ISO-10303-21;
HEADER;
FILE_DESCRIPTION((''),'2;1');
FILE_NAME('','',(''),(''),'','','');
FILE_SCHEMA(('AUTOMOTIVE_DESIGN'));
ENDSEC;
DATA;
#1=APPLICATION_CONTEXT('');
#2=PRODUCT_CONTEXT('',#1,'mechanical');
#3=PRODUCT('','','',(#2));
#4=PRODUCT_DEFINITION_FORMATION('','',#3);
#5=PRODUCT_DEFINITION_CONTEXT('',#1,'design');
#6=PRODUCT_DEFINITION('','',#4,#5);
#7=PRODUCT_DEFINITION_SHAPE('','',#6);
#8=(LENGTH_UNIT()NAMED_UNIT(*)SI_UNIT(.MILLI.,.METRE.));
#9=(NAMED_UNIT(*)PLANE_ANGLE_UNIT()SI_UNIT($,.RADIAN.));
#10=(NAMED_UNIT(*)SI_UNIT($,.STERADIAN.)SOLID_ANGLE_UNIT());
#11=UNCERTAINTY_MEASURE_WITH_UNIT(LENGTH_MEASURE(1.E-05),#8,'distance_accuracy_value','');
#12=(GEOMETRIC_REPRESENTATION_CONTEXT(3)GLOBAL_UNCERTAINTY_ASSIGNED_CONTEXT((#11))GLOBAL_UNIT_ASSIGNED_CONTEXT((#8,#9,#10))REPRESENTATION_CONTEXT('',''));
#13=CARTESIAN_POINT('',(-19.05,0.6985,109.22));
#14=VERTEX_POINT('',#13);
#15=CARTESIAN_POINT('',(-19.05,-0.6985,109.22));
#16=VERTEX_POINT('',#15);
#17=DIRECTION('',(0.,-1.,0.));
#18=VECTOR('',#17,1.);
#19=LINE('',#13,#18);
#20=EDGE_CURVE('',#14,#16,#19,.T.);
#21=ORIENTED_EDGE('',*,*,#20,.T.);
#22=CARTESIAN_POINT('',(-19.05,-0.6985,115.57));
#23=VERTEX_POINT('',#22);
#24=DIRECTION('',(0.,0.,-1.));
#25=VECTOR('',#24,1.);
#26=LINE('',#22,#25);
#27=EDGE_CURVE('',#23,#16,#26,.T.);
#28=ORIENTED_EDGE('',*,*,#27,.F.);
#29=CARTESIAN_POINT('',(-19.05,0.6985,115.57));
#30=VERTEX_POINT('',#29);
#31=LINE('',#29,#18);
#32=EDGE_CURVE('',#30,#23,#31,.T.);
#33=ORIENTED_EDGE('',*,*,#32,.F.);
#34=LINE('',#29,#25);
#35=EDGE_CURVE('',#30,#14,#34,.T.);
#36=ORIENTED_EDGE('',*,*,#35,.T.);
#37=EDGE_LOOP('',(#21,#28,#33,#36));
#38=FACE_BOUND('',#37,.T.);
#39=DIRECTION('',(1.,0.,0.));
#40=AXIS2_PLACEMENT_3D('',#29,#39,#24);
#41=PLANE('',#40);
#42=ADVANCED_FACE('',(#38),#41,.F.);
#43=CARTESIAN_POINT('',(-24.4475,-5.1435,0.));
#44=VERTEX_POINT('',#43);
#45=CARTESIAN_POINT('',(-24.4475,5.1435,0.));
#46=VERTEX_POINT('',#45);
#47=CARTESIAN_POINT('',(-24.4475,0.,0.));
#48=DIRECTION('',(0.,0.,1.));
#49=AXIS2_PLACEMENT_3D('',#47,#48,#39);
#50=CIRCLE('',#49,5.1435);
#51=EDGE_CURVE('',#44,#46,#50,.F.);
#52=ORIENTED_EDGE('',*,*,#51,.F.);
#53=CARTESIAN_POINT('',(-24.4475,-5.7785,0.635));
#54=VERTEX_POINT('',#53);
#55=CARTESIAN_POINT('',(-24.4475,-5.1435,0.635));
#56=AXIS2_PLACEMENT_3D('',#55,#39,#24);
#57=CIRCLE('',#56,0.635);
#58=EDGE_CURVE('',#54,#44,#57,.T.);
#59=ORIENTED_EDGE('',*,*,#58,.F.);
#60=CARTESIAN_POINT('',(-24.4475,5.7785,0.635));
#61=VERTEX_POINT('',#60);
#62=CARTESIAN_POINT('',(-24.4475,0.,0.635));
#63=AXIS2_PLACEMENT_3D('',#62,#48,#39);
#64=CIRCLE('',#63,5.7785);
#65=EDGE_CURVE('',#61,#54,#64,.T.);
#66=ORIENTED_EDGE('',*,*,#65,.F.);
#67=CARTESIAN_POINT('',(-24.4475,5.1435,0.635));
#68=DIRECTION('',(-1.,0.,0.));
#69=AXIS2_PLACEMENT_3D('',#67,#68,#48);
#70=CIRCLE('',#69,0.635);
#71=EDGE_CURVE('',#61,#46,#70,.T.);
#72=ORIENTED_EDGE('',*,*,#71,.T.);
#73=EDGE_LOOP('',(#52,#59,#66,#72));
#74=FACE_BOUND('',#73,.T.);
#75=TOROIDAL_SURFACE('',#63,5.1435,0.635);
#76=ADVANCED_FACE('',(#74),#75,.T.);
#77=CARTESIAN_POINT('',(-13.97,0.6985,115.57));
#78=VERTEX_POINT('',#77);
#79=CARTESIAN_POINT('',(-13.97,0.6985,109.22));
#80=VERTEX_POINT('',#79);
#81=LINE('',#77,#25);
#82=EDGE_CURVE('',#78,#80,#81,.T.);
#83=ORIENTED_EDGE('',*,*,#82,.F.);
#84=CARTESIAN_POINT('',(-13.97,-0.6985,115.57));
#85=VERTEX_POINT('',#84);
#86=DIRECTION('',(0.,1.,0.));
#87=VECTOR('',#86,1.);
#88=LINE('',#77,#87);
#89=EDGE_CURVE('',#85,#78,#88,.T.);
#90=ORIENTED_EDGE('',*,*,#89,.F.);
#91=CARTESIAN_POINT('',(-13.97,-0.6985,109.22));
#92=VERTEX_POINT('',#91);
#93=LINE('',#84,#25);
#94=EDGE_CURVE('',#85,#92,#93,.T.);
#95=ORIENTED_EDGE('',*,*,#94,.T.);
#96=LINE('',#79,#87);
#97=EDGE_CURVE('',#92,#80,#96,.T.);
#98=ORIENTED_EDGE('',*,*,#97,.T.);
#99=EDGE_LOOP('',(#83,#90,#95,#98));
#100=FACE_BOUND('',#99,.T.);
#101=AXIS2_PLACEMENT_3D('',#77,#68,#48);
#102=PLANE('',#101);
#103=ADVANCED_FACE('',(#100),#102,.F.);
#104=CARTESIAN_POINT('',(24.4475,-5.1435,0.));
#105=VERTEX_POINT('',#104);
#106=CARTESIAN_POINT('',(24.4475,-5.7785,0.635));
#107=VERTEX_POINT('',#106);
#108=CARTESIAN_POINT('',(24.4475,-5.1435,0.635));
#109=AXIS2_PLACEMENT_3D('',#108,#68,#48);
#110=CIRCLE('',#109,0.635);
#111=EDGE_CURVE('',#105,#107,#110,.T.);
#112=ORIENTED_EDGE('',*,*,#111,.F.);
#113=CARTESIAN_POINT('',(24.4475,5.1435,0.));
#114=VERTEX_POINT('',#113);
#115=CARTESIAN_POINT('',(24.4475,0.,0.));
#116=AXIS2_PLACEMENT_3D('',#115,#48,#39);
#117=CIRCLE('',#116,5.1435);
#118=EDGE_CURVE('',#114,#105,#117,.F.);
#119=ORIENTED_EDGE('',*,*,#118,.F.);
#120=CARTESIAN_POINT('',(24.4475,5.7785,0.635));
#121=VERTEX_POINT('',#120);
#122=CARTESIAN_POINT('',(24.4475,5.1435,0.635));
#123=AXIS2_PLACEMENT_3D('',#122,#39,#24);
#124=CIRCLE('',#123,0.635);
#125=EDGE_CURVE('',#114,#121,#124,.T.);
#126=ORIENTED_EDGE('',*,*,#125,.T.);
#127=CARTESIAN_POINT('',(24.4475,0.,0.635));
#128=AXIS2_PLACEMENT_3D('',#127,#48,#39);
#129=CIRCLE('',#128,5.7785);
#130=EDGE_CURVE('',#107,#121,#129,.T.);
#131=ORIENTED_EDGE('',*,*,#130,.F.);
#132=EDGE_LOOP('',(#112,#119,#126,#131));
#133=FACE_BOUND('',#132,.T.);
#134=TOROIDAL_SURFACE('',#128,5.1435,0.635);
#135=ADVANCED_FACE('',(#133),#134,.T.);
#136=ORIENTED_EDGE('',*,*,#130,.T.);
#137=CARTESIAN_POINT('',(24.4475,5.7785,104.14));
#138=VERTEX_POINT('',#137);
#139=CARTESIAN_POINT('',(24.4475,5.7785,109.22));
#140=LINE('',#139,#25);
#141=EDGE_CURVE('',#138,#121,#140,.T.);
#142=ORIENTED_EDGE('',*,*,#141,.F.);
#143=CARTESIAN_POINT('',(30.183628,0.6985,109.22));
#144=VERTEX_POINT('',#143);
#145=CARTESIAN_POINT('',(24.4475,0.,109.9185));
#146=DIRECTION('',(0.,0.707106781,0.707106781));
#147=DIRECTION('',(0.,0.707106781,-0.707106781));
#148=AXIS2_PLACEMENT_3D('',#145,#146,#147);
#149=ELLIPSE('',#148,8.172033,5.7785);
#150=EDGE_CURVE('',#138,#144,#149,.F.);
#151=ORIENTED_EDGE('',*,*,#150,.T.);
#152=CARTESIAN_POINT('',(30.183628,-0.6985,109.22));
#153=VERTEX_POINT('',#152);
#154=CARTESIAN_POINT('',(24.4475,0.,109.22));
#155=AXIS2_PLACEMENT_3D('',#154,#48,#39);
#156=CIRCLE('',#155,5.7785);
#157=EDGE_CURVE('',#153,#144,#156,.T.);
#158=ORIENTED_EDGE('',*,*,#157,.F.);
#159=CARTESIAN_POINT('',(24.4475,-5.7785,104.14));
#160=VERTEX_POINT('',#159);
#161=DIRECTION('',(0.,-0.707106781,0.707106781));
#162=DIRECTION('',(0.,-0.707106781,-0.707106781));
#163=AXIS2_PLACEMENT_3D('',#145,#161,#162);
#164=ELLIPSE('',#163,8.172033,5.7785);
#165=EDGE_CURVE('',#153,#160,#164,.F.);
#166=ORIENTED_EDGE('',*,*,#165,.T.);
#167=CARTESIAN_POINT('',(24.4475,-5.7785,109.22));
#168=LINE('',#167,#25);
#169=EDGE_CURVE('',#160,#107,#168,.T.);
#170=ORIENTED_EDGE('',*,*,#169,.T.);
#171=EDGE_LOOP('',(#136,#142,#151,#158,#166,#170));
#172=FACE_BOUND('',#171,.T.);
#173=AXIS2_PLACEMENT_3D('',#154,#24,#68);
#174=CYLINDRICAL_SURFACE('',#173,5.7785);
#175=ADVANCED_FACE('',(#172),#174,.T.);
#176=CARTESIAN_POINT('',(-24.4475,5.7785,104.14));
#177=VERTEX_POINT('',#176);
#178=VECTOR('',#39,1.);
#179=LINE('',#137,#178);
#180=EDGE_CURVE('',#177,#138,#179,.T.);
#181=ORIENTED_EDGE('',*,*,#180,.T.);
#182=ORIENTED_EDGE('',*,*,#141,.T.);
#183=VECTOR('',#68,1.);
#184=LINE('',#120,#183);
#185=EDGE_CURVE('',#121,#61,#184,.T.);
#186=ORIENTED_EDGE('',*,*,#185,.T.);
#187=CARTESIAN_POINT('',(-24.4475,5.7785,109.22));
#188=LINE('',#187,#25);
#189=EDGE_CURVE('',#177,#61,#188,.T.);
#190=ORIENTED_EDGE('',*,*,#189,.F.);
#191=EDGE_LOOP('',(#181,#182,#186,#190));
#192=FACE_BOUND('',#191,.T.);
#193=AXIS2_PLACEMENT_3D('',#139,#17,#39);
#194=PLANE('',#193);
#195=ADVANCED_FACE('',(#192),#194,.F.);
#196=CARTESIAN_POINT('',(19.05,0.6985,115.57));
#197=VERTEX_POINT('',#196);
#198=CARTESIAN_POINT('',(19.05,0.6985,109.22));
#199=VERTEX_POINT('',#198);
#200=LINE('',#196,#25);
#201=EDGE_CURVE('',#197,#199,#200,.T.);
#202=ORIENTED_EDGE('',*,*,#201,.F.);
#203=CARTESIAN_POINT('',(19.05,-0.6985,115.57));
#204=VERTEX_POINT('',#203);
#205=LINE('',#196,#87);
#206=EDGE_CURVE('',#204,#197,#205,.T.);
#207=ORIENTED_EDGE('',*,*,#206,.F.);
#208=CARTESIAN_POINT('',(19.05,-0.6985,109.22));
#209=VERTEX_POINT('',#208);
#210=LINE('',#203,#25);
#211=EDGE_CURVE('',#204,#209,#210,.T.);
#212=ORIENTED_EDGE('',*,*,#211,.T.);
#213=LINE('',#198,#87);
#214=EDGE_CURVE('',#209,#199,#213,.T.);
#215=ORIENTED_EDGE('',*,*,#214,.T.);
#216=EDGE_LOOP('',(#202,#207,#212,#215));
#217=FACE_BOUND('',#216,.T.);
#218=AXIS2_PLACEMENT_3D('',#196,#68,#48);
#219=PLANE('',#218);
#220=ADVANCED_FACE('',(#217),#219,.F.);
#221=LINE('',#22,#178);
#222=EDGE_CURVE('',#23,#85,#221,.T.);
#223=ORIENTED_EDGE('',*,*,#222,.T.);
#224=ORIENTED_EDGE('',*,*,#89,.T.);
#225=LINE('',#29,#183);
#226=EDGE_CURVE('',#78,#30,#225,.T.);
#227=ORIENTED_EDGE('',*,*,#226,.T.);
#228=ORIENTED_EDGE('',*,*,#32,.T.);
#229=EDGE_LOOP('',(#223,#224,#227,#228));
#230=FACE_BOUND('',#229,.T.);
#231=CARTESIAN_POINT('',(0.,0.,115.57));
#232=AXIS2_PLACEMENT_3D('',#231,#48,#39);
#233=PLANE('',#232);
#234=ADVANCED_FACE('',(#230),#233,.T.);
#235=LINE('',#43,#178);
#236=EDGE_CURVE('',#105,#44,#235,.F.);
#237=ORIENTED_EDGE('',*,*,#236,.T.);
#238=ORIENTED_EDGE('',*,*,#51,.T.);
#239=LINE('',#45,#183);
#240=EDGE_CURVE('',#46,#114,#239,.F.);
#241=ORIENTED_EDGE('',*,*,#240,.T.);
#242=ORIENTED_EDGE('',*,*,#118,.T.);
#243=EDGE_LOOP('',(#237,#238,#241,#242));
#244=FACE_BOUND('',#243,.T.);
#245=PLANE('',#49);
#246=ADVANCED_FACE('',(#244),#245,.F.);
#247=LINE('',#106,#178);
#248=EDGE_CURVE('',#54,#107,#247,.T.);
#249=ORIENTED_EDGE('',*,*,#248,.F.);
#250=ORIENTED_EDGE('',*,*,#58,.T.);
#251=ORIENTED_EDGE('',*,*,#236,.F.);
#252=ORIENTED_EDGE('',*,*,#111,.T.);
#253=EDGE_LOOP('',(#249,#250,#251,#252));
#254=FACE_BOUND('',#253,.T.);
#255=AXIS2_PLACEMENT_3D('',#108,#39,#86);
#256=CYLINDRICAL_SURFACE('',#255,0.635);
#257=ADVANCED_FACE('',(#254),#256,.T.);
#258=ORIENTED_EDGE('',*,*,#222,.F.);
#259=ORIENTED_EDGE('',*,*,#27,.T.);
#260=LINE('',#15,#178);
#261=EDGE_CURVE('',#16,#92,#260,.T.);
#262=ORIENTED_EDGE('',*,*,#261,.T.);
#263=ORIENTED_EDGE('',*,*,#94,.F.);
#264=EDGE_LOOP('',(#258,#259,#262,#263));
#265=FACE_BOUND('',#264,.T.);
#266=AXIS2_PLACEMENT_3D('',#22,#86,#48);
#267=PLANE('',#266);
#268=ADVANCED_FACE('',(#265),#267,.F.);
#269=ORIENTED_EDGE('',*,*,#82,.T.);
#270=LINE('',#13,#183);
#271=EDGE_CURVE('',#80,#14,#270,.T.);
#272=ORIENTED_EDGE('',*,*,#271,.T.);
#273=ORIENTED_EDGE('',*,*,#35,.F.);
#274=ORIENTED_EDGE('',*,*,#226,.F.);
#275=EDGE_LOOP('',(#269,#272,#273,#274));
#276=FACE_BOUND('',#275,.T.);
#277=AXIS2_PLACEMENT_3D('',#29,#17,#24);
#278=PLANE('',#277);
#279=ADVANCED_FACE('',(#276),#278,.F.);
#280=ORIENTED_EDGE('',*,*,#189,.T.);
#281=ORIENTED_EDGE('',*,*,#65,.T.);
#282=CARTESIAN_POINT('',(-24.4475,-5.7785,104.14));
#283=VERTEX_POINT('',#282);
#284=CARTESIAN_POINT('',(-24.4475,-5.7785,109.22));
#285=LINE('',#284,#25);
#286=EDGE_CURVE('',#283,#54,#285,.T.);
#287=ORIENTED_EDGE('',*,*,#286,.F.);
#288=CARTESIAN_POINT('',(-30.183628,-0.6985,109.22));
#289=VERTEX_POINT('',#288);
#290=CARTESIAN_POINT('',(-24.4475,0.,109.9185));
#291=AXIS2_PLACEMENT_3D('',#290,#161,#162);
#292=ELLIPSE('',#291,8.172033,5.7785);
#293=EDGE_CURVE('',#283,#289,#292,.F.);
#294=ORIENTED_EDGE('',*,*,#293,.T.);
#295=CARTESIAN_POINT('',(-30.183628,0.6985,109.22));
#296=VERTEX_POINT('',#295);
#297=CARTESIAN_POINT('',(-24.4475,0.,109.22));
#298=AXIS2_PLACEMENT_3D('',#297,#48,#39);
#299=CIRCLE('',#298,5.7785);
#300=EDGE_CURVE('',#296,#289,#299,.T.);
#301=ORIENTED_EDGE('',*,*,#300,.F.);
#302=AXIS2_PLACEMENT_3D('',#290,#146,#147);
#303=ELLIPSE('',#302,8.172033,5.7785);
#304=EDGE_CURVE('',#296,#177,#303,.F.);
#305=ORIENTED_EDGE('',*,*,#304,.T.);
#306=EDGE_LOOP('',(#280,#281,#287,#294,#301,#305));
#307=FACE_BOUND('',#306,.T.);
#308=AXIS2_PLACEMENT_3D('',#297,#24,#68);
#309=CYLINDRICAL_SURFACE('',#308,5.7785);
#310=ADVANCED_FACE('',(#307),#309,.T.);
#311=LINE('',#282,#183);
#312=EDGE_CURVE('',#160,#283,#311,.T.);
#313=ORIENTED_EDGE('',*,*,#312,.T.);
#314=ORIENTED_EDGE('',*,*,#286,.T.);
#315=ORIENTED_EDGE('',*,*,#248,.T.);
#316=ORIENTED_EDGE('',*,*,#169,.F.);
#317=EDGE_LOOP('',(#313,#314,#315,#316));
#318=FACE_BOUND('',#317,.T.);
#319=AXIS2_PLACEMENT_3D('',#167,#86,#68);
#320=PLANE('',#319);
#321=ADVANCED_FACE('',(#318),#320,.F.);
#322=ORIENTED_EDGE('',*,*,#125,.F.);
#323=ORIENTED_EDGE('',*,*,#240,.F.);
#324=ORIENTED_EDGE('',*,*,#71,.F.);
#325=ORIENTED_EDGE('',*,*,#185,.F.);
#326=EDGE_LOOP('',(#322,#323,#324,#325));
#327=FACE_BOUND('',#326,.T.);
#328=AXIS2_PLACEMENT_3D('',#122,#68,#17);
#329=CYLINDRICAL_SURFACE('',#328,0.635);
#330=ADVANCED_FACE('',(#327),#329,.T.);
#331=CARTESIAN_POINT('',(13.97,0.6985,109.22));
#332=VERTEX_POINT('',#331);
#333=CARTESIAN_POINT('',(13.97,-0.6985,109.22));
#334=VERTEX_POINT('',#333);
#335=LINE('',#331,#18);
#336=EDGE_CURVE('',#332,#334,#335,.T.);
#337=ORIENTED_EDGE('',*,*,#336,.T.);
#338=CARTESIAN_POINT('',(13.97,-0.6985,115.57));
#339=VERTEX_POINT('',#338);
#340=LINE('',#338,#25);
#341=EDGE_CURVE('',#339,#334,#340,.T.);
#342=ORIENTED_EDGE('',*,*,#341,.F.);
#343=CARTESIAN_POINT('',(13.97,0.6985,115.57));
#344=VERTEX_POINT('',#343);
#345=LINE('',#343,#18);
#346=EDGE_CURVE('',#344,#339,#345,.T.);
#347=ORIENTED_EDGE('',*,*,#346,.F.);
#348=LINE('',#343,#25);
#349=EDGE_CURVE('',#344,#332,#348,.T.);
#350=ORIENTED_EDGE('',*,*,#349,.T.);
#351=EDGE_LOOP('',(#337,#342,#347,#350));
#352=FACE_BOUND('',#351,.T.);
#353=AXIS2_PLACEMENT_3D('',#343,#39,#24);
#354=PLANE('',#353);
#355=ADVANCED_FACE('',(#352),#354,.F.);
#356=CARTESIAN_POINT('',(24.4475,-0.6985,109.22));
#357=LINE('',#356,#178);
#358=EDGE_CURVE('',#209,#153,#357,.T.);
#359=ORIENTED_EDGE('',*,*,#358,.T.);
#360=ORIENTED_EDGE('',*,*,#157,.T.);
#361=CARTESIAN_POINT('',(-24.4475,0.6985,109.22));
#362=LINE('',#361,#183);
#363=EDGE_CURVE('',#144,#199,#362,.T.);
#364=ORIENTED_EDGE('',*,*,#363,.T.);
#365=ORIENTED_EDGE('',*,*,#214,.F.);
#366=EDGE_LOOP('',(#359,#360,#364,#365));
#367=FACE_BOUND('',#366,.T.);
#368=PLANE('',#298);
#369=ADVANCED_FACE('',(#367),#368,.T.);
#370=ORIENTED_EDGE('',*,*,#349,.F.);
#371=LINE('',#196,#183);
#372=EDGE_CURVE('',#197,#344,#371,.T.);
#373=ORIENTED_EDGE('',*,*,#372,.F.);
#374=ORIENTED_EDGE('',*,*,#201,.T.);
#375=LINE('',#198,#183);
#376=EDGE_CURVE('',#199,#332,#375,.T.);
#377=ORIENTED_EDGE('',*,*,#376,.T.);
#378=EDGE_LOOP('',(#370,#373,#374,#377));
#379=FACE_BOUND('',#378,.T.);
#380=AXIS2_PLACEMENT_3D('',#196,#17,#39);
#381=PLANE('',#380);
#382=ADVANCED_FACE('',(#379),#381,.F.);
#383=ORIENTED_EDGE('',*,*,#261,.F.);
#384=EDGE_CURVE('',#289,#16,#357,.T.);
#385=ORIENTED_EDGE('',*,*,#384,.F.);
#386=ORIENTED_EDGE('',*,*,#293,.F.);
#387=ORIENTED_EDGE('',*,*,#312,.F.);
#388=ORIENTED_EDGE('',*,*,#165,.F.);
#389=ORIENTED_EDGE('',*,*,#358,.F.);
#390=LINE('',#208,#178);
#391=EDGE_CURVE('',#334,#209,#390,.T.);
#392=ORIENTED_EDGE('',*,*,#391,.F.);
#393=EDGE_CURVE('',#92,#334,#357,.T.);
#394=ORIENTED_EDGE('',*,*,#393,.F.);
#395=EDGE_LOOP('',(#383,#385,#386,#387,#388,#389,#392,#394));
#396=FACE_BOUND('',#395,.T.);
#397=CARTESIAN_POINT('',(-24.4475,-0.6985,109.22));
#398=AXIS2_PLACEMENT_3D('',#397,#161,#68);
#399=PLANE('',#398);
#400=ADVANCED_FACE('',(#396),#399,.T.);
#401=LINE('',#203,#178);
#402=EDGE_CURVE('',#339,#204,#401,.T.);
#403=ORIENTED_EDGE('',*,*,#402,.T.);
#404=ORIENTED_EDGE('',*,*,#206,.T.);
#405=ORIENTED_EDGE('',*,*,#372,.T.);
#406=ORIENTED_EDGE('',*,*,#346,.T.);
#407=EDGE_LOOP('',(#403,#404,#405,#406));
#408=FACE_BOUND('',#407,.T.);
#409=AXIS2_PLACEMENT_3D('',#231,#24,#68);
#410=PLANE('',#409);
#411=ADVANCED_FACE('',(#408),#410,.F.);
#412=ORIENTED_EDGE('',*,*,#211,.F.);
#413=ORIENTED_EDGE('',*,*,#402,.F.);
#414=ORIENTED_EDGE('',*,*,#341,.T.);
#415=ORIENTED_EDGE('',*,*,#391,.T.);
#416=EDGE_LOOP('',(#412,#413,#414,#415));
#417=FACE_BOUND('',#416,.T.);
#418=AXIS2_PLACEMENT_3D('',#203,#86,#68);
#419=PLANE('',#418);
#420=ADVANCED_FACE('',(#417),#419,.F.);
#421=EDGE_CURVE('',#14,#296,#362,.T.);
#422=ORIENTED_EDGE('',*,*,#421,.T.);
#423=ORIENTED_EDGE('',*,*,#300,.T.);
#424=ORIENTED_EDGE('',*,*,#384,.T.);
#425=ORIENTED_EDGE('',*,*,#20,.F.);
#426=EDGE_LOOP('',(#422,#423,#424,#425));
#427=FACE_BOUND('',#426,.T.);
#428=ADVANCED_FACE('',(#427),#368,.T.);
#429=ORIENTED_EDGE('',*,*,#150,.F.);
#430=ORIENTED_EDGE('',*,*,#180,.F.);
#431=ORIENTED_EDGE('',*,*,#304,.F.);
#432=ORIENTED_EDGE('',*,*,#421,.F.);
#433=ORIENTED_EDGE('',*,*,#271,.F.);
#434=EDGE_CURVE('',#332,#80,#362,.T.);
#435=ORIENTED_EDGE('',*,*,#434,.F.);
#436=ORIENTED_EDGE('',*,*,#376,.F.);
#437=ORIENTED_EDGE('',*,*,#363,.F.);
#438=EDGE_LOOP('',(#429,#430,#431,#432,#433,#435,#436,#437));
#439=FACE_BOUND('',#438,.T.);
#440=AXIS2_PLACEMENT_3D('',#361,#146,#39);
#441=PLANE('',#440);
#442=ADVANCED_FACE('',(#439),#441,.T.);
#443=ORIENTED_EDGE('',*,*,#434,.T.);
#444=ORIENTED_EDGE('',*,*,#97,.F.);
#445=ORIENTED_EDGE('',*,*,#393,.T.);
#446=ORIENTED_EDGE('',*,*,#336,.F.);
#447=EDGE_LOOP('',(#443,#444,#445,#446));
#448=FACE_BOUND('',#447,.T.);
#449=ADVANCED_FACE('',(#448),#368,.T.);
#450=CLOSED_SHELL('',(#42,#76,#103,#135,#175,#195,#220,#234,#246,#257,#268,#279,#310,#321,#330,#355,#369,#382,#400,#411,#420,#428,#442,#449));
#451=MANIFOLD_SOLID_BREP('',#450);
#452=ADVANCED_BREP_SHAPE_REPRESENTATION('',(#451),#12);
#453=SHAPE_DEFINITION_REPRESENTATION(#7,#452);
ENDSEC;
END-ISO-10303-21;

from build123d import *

# Parameters (mm, degrees)
BOSS_EXTRUDE1_DEPTH = 109.22
FILLET1_R           = 0.635
CHAMFER1_SIZE       = 5.08
SKETCH2_W           = 5.08
SKETCH2_H           = 1.397
BOSS_EXTRUDE2_DEPTH = 6.35


with BuildPart() as part:
    # Sketch1 → Boss-Extrude1 (new body)
    with BuildSketch(Plane.XY):
        with BuildLine():
            Line((24.4475, -5.7785), (-24.4475, -5.7785))
            ThreePointArc((-24.4475, -5.7785), (-30.226, 0), (-24.4475, 5.7785))
            Line((-24.4475, 5.7785), (24.4475, 5.7785))
            ThreePointArc((24.4475, 5.7785), (30.226, 0), (24.4475, -5.7785))
        make_face()
    extrude(amount=BOSS_EXTRUDE1_DEPTH)

    # Fillet1
    fillet1_edges = [part.edges().sort_by_distance(p)[0] for p in [
        (0, 5.7785, 0),
        (30.226, 0, 0),
        (0, -5.7785, 0),
        (-30.226, 0, 0),
    ]]
    fillet(fillet1_edges, radius=FILLET1_R)

    # Chamfer1
    # the kernel refuses this chamfer: 5.08 mm, written as the material it takes off along each edge
    with BuildSketch(Plane(origin=(-37.511649579, 5.7785, 109.22), x_dir=(0, 0.02749587661058642, -0.9996219169112968), z_dir=(1, 0, 0))) as chamfer1_piece_1:
        Polygon((CHAMFER1_SIZE * 0.999621916911, -CHAMFER1_SIZE * 0.0274958766106), (-CHAMFER1_SIZE * 0.0274958766106, -CHAMFER1_SIZE * 0.999621916911), (0, 0), align=None)
    extrude(amount=75.023299158, mode=Mode.SUBTRACT)
    with BuildSketch(Plane(origin=(37.511649579, -5.7785, 109.22), x_dir=(0, 0.9996219169112966, 0.02749587661058728), z_dir=(-1, 0, 0))) as chamfer1_piece_2:
        Polygon((CHAMFER1_SIZE * 0.999621916911, CHAMFER1_SIZE * 0.0274958766106), (-CHAMFER1_SIZE * 0.0274958766106, CHAMFER1_SIZE * 0.999621916911), (0, 0), align=None)
    extrude(amount=75.023299158, mode=Mode.SUBTRACT)

    # Sketch2 → Boss-Extrude2 (add)
    with BuildSketch(Plane.XY.offset(109.22)):
        with Locations((-16.51, 0)):
            Rectangle(SKETCH2_W, SKETCH2_H)
        with Locations((16.51, 0)):
            Rectangle(SKETCH2_W, SKETCH2_H)
    extrude(amount=BOSS_EXTRUDE2_DEPTH)


solid = part.part
